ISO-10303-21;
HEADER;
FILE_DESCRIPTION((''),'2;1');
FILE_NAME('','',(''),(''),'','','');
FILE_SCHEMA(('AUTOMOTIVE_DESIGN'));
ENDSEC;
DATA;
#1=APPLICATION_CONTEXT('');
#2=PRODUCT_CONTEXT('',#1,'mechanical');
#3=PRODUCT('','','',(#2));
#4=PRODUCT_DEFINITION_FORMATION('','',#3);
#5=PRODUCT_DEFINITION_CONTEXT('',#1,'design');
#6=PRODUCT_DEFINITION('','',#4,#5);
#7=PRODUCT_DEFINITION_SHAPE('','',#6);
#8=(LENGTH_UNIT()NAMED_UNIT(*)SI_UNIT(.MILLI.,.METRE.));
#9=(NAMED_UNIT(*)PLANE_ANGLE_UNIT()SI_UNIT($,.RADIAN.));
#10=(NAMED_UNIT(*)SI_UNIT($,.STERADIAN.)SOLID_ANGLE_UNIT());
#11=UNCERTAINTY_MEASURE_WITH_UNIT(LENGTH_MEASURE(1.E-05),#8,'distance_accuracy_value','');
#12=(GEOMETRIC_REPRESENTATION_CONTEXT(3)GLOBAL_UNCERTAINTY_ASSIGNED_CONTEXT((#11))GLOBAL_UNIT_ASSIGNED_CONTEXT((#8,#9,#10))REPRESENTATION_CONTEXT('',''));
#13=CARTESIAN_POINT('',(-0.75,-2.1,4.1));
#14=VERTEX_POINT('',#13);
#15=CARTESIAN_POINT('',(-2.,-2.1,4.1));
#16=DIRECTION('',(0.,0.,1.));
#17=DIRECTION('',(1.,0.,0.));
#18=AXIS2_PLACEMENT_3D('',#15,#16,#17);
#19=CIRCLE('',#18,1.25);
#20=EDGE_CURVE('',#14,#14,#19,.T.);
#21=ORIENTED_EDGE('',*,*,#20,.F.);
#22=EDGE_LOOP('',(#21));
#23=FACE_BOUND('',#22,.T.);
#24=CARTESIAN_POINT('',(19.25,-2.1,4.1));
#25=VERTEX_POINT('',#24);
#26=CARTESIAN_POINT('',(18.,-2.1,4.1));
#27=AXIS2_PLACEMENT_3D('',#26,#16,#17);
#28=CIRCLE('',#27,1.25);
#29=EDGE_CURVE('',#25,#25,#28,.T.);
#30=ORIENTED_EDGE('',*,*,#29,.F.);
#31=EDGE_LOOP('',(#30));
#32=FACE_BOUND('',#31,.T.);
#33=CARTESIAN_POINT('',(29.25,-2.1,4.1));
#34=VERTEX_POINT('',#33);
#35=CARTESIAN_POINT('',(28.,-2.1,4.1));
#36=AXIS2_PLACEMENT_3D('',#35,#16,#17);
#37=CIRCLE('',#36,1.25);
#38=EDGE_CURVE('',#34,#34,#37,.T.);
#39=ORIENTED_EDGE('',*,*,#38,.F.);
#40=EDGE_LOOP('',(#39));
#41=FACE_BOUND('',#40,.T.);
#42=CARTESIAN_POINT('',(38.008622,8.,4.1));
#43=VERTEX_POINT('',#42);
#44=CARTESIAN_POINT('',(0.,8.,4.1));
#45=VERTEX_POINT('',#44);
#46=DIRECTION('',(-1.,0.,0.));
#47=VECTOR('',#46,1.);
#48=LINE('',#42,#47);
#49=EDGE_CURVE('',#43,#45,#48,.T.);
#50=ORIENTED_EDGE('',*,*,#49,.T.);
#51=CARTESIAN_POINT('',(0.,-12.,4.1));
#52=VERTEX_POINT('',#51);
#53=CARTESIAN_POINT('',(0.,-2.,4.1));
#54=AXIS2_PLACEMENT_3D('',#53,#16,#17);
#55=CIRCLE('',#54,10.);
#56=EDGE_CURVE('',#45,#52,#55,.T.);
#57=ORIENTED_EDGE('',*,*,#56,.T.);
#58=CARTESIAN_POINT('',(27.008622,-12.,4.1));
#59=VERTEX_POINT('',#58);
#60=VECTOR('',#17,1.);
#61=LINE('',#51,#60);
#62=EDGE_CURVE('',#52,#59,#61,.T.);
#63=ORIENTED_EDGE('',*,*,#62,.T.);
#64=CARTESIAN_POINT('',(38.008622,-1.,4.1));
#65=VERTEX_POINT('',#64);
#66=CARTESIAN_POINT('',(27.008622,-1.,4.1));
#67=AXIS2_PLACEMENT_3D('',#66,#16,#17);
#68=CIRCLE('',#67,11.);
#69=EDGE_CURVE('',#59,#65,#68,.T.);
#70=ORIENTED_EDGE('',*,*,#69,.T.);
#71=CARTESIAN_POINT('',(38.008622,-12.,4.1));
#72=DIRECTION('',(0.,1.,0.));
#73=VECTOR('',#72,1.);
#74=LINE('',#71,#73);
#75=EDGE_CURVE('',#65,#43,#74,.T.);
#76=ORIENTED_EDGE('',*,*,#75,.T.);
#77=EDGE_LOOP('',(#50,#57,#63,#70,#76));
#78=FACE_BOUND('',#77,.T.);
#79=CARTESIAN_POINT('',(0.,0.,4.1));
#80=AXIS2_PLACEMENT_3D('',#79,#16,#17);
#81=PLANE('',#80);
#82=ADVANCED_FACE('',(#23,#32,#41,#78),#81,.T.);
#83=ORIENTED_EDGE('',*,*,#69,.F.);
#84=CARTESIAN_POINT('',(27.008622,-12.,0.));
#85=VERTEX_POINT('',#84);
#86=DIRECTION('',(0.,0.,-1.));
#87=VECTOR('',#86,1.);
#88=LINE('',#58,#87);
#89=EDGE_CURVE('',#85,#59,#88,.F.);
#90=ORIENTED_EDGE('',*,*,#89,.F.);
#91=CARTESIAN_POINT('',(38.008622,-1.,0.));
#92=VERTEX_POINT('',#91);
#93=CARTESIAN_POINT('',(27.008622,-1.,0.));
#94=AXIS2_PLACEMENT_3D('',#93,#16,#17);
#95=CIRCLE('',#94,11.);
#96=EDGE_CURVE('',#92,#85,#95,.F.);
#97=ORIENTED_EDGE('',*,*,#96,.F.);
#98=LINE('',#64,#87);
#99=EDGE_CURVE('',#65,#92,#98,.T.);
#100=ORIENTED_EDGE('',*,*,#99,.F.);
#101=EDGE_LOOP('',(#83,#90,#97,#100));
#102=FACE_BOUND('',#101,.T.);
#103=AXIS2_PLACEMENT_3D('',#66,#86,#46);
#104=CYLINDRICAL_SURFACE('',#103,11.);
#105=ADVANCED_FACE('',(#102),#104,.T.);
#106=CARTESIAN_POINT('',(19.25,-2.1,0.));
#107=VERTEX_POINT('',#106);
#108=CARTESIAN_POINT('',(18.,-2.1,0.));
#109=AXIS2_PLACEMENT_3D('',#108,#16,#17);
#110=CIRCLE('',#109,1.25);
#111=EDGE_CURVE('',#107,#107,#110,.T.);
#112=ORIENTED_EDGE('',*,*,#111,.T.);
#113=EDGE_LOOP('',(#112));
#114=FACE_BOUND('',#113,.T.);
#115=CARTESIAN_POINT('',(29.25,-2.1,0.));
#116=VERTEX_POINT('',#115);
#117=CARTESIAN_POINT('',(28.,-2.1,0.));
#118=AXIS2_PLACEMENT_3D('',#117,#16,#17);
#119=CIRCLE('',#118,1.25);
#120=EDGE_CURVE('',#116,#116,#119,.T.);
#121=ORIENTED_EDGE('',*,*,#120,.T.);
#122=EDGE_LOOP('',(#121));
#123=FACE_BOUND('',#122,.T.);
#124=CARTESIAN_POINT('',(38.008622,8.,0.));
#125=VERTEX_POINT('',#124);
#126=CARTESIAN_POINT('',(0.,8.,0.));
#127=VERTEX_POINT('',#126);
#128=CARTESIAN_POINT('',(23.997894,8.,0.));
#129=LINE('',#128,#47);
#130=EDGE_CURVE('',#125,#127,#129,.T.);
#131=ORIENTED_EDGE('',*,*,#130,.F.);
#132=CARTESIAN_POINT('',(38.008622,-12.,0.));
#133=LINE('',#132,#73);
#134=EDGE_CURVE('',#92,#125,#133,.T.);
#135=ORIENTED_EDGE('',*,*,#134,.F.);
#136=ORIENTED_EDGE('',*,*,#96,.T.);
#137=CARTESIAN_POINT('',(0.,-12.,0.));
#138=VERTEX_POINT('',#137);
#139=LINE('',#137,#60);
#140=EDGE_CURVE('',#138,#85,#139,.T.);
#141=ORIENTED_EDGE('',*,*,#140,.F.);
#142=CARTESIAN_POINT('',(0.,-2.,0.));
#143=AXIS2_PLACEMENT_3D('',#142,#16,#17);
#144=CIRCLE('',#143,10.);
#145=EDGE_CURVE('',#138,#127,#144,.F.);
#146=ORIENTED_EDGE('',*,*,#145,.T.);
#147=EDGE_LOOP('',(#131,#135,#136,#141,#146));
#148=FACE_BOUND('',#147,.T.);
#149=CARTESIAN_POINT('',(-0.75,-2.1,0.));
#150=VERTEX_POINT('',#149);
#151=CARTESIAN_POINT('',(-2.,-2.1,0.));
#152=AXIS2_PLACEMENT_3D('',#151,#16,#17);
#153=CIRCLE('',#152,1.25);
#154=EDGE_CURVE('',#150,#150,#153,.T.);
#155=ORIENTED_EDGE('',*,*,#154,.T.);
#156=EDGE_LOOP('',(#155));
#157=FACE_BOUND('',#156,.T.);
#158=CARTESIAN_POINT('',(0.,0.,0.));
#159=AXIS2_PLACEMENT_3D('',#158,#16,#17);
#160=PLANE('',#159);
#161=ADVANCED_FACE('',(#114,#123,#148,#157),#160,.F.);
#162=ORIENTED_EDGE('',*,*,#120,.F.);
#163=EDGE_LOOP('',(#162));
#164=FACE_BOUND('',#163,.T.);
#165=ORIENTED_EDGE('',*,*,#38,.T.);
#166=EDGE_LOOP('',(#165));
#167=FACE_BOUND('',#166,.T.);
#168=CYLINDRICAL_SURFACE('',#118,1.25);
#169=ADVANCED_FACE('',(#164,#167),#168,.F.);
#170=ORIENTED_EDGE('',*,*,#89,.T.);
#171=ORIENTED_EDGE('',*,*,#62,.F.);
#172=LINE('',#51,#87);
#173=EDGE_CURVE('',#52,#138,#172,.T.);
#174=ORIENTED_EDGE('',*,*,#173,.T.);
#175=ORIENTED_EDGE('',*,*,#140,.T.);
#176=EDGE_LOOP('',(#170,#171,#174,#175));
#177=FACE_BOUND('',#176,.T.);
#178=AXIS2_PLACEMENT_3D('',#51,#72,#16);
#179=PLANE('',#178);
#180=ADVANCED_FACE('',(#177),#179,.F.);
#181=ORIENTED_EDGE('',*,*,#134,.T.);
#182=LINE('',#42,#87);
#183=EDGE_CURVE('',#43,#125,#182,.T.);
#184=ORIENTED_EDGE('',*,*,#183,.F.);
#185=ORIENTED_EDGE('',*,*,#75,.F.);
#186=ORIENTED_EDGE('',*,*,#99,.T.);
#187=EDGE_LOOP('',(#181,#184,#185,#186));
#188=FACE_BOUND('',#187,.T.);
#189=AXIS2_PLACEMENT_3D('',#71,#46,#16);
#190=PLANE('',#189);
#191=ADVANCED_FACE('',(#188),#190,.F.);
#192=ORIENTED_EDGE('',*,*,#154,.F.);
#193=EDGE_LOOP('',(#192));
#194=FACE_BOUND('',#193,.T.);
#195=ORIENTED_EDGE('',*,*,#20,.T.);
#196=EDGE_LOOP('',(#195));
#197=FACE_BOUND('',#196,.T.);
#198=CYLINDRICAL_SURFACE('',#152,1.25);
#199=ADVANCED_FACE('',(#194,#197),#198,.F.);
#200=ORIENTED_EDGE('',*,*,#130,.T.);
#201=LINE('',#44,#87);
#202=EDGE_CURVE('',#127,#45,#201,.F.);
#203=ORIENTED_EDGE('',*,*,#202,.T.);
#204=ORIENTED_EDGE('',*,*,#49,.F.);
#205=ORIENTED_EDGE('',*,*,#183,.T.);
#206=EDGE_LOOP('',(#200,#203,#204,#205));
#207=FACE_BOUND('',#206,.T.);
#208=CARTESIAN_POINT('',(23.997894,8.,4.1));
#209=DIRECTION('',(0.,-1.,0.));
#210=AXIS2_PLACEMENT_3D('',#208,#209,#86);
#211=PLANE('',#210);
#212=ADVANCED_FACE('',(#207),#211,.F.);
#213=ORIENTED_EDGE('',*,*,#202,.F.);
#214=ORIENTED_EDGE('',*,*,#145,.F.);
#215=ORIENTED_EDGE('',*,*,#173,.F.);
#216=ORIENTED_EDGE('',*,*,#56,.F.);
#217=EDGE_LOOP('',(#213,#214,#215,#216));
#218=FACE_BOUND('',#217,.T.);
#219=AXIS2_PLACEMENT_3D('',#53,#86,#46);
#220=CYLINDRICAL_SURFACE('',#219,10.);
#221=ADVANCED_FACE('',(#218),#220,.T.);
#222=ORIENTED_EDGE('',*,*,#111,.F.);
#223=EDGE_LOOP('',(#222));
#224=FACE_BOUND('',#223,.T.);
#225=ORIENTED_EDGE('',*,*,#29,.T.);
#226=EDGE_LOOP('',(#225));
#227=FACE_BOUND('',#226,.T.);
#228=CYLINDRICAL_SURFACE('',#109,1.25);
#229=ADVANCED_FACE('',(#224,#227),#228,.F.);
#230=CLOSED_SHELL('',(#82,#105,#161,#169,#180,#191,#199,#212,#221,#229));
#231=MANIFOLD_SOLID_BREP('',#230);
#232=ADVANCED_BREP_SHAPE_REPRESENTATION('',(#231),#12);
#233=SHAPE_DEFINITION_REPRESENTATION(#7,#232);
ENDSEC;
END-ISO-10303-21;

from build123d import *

# Parameters (mm, degrees)
ESTRUSIONE_ESTRUSIONE1_DEPTH = 4.1
SCHIZZO2_R                   = 1.25
TAGLIO_ESTRUSIONE1_DEPTH     = 4.1
RACCORDO1_DEPTH              = 4.1
RACCORDO2_R                  = 11


with BuildPart() as part:
    # Schizzo1 → Estrusione-Estrusione1 (new body)
    with BuildSketch(Plane.XY):
        with BuildLine():
            Line((-12, 0), (-12, 8))
            Line((-12, 8), (23.997894166, 8))
            Line((23.997894166, 8), (38.008621711, 8))
            Line((38.008621711, 8), (38.008621711, -12))
            Line((38.008621711, -12), (0, -12))
            ThreePointArc((0, -12), (-8.485281374, -8.485281374), (-12, 0))
        make_face()
    extrude(amount=ESTRUSIONE_ESTRUSIONE1_DEPTH)

    # Schizzo2 → Taglio-Estrusione1 (cut)
    with BuildSketch(Plane.XY.offset(4.1)):
        with Locations((-2, -2.1)):
            Circle(SCHIZZO2_R)
        with Locations((28, -2.1)):
            Circle(SCHIZZO2_R)
        with Locations((18, -2.1)):
            Circle(SCHIZZO2_R)
    extrude(amount=-TAGLIO_ESTRUSIONE1_DEPTH, mode=Mode.SUBTRACT)

    # Raccordo1: read off the stored shape, not the designer's step
    # Raccordo1 outline → Raccordo1 (cut)
    with BuildSketch(Plane.XY):
        with BuildLine():
            ThreePointArc((-12, 0), (-8.485281374, -8.485281374), (0, -12))
            ThreePointArc((0, -12), (-10, -2), (0, 8))
            Line((0, 8), (-12, 8))
            Line((-12, 8), (-12, 0))
        make_face()
    extrude(amount=RACCORDO1_DEPTH, mode=Mode.SUBTRACT)

    # Raccordo2
    raccordo2_edges = [part.edges().sort_by_distance(p)[0] for p in [
        (38.008621711, -12, 2.05),
    ]]
    fillet(raccordo2_edges, radius=RACCORDO2_R)


solid = part.part
